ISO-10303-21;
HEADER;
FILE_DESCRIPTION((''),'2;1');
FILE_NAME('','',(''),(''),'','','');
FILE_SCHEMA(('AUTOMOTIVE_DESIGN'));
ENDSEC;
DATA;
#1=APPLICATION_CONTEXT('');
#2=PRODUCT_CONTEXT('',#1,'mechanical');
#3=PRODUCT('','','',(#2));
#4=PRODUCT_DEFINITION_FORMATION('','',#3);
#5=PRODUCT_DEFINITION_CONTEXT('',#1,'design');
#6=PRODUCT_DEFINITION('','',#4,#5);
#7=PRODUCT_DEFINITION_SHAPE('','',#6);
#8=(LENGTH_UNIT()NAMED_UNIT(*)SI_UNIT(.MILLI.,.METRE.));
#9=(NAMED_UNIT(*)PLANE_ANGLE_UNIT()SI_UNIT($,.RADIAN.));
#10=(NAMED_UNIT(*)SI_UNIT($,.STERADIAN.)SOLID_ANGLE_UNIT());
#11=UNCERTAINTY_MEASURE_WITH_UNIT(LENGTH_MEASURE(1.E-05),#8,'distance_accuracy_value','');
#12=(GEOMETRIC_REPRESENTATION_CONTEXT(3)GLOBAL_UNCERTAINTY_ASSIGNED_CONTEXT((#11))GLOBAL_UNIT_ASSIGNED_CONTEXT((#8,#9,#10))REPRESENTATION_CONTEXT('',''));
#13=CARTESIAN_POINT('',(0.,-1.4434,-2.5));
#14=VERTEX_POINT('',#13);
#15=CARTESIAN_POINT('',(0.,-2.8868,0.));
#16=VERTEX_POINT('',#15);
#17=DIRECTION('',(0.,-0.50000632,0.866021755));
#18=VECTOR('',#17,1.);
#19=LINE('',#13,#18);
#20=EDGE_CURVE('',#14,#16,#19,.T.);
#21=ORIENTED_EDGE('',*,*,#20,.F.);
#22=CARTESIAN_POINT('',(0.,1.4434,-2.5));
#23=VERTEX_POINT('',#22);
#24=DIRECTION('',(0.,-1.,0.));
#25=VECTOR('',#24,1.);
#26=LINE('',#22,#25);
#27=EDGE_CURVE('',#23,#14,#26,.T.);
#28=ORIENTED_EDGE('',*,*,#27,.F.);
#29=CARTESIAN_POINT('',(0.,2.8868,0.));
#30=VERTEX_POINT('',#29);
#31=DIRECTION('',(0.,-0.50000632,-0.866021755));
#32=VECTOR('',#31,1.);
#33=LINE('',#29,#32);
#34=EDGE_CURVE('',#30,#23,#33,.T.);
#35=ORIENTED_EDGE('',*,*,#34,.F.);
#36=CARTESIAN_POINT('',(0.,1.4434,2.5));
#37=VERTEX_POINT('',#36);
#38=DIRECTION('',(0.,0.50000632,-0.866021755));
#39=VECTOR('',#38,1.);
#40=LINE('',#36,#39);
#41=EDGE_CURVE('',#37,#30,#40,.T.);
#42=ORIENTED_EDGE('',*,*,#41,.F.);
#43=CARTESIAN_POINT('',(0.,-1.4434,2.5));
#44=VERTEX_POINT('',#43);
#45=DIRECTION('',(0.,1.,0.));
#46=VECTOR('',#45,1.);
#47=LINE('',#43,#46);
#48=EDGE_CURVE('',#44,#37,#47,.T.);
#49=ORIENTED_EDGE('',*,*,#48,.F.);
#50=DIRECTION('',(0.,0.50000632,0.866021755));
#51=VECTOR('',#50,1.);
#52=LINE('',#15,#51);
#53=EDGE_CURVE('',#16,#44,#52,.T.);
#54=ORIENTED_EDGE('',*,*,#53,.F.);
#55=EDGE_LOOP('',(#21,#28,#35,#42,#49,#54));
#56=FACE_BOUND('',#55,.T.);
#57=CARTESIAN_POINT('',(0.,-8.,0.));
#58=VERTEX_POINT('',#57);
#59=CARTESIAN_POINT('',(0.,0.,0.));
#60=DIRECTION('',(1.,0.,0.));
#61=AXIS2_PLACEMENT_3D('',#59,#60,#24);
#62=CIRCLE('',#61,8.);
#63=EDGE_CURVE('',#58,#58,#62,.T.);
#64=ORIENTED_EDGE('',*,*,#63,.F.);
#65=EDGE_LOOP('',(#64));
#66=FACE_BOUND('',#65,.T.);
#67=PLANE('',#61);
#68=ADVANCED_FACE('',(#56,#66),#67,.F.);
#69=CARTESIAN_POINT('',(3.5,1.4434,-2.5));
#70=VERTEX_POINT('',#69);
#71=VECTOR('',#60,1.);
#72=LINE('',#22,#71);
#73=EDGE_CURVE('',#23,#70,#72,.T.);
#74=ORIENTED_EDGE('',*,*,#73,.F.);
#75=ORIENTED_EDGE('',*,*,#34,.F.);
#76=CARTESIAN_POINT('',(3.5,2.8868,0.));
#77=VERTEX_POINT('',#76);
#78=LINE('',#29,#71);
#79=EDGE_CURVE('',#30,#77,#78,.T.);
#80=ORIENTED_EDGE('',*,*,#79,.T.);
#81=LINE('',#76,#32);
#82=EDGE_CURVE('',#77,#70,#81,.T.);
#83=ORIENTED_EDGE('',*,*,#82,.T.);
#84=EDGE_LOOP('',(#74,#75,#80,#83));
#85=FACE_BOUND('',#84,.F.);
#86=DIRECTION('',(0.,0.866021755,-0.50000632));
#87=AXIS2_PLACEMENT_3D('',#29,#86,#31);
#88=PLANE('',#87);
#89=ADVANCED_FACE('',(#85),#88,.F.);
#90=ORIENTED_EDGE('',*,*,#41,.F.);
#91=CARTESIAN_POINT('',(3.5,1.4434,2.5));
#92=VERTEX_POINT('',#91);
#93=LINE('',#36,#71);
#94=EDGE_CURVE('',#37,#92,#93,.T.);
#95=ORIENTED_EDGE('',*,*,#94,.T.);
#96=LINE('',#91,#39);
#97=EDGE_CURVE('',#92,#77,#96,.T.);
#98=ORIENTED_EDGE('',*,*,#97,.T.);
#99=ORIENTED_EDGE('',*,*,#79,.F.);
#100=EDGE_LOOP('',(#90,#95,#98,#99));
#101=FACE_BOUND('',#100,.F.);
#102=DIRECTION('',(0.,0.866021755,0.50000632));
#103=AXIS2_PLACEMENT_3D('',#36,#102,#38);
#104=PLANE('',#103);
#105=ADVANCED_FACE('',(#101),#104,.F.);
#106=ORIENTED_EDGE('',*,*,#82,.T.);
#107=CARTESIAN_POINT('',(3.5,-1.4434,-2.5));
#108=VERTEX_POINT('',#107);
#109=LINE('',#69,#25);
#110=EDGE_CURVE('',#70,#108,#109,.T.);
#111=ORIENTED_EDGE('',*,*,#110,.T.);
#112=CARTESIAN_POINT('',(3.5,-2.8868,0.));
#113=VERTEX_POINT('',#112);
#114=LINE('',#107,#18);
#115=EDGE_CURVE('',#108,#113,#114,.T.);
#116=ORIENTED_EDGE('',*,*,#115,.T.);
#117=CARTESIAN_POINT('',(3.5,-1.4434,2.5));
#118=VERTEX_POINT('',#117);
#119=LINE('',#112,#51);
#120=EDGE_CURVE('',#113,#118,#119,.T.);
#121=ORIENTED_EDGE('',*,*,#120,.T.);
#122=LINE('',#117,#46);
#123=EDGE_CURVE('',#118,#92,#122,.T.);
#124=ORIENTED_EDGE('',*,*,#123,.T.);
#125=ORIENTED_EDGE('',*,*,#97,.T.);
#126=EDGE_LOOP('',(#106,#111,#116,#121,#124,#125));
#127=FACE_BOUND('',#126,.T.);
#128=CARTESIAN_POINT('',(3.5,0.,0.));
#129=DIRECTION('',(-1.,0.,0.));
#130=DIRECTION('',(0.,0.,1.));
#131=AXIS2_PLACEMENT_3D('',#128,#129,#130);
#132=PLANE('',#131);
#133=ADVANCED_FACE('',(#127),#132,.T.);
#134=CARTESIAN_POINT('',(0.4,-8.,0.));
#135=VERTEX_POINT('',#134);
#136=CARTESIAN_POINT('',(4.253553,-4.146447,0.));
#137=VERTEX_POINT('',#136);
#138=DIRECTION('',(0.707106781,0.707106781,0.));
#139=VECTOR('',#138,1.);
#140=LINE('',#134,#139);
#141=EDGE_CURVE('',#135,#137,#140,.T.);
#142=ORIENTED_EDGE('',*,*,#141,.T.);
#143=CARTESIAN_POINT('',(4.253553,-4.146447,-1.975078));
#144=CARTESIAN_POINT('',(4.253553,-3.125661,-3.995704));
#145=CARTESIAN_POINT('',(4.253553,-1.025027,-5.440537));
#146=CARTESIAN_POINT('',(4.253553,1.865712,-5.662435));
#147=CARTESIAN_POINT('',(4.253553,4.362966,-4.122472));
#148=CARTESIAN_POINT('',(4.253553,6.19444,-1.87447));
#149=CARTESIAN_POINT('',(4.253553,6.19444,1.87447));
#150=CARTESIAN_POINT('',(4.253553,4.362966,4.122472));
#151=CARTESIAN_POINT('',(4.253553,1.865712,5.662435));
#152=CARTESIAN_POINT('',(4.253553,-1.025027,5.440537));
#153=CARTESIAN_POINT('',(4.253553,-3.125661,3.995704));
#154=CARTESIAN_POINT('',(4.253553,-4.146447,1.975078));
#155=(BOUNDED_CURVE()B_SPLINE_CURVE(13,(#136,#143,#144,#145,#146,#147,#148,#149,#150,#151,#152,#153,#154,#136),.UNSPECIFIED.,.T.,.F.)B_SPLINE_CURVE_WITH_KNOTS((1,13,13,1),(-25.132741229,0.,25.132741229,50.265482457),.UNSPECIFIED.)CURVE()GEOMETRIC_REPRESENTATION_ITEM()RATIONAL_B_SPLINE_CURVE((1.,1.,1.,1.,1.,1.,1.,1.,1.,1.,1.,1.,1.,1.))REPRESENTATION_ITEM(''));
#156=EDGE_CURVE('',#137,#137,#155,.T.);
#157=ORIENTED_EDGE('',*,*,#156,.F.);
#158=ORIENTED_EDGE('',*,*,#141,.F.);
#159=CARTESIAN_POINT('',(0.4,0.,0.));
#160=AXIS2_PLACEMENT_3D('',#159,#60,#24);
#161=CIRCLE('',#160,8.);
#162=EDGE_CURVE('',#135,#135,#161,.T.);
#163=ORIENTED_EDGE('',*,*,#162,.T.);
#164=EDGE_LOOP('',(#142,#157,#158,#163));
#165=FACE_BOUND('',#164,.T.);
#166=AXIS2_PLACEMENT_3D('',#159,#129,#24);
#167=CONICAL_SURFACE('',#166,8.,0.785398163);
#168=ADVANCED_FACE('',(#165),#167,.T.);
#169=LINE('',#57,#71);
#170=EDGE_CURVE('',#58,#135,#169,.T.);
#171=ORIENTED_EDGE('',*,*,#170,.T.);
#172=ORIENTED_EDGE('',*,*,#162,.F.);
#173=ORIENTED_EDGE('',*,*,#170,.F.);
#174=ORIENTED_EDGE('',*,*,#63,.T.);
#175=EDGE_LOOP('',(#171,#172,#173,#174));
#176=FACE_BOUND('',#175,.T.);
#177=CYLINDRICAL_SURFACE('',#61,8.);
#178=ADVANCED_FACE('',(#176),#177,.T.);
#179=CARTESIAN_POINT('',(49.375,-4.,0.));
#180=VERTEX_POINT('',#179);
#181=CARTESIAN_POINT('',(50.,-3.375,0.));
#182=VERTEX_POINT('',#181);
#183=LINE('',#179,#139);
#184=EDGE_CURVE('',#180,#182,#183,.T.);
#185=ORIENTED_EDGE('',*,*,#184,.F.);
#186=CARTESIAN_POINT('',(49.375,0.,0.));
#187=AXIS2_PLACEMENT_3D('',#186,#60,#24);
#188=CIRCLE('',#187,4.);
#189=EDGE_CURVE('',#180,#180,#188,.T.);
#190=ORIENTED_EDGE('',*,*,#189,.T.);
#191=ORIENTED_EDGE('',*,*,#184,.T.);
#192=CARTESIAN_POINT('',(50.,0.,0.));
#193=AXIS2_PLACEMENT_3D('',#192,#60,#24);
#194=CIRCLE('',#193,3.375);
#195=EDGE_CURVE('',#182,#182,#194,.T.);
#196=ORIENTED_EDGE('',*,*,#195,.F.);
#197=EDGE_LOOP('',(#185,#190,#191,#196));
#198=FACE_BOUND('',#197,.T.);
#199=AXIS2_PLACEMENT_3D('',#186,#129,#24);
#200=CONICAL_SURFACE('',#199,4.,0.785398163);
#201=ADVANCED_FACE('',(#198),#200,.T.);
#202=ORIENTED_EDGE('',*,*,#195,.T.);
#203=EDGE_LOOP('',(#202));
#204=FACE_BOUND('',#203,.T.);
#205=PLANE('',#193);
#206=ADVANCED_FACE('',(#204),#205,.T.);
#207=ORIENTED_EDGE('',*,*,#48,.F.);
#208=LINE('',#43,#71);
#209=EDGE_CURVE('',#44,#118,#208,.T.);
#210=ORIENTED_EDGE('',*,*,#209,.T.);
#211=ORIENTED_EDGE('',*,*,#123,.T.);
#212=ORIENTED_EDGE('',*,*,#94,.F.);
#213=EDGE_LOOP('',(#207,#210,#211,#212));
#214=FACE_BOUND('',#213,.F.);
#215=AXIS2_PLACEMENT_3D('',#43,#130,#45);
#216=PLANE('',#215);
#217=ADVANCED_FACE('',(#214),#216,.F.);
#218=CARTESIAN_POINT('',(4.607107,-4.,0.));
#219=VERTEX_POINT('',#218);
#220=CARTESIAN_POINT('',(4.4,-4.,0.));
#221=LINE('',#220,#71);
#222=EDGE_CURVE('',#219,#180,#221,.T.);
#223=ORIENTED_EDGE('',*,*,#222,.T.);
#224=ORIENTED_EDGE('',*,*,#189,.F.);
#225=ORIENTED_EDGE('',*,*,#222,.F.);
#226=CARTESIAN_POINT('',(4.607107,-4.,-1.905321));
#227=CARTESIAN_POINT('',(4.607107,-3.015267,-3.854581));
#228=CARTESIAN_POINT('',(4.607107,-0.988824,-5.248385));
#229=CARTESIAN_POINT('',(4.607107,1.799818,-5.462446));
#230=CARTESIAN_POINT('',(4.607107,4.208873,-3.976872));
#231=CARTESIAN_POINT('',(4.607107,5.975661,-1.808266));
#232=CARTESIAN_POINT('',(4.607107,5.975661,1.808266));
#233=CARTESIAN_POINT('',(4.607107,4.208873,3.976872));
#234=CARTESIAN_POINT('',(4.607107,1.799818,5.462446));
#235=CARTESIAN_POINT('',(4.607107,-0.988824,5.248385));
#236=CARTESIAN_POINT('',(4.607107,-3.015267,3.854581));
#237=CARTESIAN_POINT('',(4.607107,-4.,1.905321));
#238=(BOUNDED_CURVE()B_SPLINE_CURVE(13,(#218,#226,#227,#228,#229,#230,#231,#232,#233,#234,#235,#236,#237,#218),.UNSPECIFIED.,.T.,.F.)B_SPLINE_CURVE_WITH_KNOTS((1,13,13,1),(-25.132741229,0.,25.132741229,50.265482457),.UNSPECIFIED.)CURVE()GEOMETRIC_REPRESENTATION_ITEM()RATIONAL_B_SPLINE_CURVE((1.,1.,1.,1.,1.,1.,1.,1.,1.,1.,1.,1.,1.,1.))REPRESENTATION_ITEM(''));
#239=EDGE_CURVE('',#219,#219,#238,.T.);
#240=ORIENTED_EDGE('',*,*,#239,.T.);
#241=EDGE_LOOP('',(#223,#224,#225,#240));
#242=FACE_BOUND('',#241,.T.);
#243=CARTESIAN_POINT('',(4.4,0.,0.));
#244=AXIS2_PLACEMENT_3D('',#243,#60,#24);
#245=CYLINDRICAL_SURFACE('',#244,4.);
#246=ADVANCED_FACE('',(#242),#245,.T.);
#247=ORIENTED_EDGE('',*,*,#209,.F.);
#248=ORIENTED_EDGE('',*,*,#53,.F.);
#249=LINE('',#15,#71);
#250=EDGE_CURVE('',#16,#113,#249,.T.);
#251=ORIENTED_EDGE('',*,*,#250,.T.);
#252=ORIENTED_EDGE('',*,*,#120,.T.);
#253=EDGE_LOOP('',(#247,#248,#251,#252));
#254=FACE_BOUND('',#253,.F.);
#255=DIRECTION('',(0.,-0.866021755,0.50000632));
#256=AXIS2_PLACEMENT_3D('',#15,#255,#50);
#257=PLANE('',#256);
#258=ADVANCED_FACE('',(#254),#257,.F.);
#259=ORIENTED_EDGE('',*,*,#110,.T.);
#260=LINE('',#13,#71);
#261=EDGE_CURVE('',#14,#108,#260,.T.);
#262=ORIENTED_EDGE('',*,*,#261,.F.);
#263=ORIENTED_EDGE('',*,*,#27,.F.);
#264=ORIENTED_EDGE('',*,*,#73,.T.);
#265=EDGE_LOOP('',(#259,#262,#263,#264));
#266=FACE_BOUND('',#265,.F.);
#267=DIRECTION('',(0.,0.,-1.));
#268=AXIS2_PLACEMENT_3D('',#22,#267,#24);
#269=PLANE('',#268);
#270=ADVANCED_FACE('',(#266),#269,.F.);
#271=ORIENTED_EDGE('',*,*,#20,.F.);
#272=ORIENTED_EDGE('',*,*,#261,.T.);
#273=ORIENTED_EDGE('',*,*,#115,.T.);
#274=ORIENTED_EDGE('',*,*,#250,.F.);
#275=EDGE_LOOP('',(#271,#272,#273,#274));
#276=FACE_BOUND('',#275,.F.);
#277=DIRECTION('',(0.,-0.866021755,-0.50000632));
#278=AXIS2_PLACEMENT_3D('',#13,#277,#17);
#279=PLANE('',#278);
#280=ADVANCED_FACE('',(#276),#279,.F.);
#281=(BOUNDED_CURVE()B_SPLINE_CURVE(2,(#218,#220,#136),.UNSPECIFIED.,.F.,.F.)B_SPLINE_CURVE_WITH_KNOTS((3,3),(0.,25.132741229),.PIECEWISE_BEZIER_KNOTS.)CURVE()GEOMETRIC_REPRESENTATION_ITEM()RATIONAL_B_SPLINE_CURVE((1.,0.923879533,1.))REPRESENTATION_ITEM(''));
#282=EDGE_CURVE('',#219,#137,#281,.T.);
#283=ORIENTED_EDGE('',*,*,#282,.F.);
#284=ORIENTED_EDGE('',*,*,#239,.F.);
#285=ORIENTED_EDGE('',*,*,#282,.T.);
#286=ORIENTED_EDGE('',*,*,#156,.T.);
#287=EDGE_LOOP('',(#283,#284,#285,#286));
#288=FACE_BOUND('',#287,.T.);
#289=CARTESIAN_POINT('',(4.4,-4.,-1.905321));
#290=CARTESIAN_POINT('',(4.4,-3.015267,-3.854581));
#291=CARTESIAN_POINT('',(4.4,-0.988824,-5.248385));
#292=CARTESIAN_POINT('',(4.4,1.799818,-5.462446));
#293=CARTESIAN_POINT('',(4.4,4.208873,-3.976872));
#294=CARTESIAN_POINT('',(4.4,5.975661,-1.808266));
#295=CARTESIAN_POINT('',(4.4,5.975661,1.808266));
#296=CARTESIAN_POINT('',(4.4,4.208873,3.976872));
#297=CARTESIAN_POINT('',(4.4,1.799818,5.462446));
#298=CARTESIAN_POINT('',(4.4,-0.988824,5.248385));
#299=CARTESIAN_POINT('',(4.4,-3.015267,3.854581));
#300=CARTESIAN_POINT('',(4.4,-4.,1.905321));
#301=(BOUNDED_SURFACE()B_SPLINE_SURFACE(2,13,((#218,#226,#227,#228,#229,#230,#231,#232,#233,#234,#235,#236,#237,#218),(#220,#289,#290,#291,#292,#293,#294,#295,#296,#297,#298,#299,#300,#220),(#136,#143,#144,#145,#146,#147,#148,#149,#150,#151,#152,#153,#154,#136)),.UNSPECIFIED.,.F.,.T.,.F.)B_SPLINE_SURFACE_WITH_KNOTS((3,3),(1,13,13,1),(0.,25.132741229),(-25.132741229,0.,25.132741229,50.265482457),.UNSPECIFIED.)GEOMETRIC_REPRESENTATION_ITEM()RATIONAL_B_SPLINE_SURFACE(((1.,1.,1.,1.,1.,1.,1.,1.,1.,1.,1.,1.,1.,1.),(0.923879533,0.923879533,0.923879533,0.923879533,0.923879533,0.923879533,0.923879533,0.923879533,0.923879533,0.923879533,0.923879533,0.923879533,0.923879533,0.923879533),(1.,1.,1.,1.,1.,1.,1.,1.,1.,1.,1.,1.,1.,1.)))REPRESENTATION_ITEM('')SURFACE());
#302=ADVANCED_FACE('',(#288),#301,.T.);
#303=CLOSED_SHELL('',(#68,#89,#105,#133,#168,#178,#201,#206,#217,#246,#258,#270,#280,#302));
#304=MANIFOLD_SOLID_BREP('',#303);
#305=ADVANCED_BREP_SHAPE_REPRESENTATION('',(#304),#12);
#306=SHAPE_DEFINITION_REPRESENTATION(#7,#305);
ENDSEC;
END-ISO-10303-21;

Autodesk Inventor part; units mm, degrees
ref_plane "YZ Plane" through (0, 0, 0) normal (1, 0, 0) x (0, 1, 0)
sketch "Skizze1" plane through (0, 0, 0) normal (0, 1, 0) x (-1, 0, 0)
  point P0 (0, 0)
sketch "Skizze2" plane through (0, 0, 0) normal (0, 0, 1) x (-1, 0, 0)
  line L0 (-50, 4) -> (-50, 0)
  line L1 (-4.4, 4) -> (-50, 4)
  line L2 (-0.4, 8) -> (-4.4, 4)
  line L3 (0, 8) -> (-0.4, 8)
  line L4 (0, 0) -> (0, 8)
  line L5 (-50, 0) -> (0, 0)
  line L6 (-50, 0) -> (0, 0)
  line L7 (0, -9.6) -> (0, 1.6) projected
  line L8 (10, 0) -> (-60, 0) projected
  dimension "ParC" = 0.4
  dimension "d43" = 45
  dimension "d44" = 8
  dimension "d45" = 4
  dimension "d46" = 50
  dimension "d47" = 0
  dimension "d48" = 0
revolve "Drehung1" add sketch "Skizze2" angle 360 about axis through (50, 0, 0) along (1, 0, 0)
sketch "Skizze3" plane through (0, 0, 0) normal (-1, 0, 0) x (0, 0, 1)
  line L0 (-2.5, 1.4434) -> (-2.5, -1.4434)
  line L1 (0, 2.8868) -> (-2.5, 1.4434)
  line L2 (2.5, 1.4434) -> (0, 2.8868)
  line L3 (2.5, -1.4434) -> (2.5, 1.4434)
  line L4 (0, -2.8868) -> (2.5, -1.4434)
  line L5 (-2.5, -1.4434) -> (0, -2.8868)
  circle A0 centre (0, 0) radius 2.5 construction
  circle A1 centre (0, 0) radius 4 construction
  dimension "d11" = 5
  dimension "d13" = 120
  dimension "d15" = 120
extrude "Extrusion1" cut sketch "Skizze3" against normal blind 3.5
fillet "Rundung1" radius 0.5 1 edges at (4.4, 4, 0)
chamfer "Fase1" distance 0.625 angle 45 1 edges at (50, 4, 0) measured on face at (34.869, 0.9596, 3.8832)
thread "Gewinde1" size "M8x1.25" class "6g" standard "ISO Metric profile" length 22
ref_plane "MSC_PF1" through (0, 0, 0) normal (1, 0, 0) x (0, 1, 0)
ref_plane "MSC_PT1" through (0, 0, 0) normal (1, 0, 0) x (0, 1, 0)
equation "\"d43\" = 0.5 * ang"
equation "\"d44\" = 0.5 * dk"
equation "\"d45\" = 0.5 * NND"
equation "\"d46\" = NLG"
equation "\"d11\" = ParS"
equation "\"d16\" = ParT"
equation "\"d18\" = r"
equation "\"d19\" = 0.5 * PTC"
equation "\"d39\" = 0.5 * PTC"
equation "\"NND\" = 8"
equation "\"PTC\" = 1.25"
equation "\"dk\" = 16"
equation "\"ParK\" = 4.4"
equation "\"ParS\" = 5"
equation "\"ParT\" = 3.5"
equation "\"r\" = 0.5"
equation "\"NLG\" = 50"
equation "\"ang\" = 90deg"
equation "\"THREADDIA\" = NND"
properties part number "ISO 10642 - M8 x  50" material "Stahl"
